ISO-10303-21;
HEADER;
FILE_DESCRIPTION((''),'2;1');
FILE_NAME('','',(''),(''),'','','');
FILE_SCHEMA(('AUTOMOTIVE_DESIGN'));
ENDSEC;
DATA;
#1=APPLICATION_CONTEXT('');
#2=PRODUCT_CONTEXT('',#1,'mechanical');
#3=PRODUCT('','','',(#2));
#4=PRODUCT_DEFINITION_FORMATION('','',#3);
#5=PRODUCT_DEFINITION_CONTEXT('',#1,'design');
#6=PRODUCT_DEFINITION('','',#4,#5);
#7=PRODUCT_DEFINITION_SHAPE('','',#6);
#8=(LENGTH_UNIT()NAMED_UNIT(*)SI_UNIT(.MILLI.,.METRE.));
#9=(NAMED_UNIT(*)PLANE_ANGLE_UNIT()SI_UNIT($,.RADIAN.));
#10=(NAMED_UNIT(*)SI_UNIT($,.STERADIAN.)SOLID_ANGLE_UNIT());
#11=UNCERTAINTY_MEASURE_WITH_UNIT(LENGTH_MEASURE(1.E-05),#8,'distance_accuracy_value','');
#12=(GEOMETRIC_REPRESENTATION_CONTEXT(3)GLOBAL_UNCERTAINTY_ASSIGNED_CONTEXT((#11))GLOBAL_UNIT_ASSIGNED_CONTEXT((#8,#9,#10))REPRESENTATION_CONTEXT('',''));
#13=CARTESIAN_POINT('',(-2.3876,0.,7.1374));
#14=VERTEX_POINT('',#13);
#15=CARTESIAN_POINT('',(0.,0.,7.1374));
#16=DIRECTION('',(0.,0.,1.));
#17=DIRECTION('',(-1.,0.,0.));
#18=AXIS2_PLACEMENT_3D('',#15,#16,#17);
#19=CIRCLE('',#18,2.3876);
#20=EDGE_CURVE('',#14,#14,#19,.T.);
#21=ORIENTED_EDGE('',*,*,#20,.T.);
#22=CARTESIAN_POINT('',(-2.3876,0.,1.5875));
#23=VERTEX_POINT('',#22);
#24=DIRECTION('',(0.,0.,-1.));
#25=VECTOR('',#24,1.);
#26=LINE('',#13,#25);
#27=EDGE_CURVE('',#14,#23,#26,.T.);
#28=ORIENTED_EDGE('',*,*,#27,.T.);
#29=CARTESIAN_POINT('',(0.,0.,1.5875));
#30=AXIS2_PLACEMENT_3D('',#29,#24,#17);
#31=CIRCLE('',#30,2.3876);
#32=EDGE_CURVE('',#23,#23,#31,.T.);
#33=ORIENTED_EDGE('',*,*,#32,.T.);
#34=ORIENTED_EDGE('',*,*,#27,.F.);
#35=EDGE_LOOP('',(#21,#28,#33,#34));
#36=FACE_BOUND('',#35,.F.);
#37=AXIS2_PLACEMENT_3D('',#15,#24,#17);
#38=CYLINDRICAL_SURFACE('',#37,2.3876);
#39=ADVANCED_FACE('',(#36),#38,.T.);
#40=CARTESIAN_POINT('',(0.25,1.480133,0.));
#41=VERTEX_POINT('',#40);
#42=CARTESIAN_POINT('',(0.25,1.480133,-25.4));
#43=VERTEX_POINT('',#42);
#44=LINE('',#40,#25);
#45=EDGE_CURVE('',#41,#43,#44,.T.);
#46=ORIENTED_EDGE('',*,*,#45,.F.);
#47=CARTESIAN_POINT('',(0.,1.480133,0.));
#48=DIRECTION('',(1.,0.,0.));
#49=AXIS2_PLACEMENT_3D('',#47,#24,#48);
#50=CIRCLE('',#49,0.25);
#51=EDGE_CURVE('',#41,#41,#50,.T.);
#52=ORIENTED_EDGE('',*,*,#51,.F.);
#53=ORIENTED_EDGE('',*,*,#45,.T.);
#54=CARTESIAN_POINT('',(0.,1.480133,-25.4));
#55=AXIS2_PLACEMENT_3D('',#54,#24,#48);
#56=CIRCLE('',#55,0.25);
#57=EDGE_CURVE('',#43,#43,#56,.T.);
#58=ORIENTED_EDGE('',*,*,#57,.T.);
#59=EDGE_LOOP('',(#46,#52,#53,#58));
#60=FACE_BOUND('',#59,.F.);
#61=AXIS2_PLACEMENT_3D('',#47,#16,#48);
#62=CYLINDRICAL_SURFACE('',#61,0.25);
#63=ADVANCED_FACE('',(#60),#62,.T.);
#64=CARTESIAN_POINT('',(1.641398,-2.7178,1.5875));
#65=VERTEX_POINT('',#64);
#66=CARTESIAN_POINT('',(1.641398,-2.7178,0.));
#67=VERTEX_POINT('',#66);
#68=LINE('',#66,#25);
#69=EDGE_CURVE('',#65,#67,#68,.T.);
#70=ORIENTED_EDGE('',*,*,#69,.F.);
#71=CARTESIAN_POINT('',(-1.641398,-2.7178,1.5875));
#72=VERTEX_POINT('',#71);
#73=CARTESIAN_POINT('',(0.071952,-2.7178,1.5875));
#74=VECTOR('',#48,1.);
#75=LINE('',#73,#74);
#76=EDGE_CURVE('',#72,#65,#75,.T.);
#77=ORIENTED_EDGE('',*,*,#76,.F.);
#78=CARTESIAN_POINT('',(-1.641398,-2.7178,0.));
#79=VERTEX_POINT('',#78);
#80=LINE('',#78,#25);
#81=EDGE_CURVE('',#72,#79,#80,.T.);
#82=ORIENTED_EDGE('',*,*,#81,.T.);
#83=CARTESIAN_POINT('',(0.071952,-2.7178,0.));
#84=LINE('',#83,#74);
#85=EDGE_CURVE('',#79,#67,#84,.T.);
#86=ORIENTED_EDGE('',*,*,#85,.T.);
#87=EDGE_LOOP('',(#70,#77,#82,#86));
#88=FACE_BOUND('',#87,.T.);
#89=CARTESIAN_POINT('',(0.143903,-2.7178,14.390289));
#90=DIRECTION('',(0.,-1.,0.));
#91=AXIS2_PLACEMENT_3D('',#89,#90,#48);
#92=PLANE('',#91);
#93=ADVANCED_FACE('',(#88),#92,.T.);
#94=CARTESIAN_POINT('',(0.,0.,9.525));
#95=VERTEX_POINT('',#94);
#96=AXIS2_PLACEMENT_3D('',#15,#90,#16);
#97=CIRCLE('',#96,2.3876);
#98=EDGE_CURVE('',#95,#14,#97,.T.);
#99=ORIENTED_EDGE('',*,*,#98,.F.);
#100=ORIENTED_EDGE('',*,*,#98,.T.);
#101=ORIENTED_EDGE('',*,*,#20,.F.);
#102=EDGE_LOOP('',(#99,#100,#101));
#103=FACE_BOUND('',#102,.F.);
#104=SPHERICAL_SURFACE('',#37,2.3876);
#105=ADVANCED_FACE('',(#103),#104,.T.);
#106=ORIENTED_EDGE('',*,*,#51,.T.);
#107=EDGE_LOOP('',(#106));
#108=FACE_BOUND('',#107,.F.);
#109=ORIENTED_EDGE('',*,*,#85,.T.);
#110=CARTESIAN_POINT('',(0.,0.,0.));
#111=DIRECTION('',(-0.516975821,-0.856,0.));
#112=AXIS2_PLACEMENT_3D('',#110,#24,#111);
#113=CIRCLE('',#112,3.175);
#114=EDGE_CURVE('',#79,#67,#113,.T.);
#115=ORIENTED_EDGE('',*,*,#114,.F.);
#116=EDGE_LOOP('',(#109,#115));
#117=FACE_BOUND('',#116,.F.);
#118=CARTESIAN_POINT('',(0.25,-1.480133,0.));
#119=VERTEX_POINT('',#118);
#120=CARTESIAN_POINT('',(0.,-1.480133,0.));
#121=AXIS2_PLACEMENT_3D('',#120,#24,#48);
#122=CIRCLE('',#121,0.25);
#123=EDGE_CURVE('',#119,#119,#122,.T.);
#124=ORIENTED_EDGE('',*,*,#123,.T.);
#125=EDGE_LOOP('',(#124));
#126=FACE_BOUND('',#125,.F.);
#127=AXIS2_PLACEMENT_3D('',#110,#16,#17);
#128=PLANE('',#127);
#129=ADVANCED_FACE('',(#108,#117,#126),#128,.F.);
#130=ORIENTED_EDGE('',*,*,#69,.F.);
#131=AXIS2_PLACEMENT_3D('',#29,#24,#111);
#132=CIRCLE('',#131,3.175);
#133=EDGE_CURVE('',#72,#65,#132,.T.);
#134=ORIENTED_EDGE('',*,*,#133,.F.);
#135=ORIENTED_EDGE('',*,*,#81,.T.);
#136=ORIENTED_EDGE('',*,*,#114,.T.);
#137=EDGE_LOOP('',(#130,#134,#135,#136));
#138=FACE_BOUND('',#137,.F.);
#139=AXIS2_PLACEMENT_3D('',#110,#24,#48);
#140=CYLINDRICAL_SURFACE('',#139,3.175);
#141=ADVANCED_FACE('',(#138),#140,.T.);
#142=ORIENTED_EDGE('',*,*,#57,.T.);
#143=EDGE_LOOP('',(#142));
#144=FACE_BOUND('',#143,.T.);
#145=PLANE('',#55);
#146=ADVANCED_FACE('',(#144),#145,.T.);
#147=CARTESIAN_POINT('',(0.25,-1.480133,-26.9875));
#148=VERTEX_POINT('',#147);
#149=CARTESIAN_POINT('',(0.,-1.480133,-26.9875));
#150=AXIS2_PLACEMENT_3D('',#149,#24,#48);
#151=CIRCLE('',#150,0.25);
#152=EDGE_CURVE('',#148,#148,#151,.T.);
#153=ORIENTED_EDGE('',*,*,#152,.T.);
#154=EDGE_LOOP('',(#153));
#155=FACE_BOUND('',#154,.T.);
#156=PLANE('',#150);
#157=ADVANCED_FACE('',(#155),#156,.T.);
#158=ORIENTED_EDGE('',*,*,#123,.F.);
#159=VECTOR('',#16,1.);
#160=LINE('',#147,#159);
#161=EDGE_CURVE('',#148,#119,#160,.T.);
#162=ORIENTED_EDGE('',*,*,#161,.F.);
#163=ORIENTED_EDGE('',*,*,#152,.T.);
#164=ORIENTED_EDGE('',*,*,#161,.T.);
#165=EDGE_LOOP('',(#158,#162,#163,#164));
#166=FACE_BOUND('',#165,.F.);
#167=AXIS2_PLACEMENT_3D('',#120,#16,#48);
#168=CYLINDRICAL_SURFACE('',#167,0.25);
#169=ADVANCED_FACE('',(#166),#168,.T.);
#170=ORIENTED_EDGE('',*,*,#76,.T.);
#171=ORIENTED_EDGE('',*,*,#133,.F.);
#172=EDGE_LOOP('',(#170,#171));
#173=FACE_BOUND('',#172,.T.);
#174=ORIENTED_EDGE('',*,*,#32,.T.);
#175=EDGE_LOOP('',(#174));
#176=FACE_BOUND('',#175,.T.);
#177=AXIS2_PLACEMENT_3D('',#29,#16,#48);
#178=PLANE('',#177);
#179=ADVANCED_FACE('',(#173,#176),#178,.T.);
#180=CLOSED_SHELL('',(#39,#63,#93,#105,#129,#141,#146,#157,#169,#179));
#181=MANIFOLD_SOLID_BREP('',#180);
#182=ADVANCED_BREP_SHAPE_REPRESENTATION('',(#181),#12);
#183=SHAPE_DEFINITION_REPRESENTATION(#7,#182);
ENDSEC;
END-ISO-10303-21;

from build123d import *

# Parameters (mm, degrees)
F0_R      = 3.175
F1_DEPTH  = 1.5875
F6_W      = 20.4342100769
F6_H      = 36.2635273486
F7_DEPTH  = 10.668
F8_R      = 0.25
F9_DEPTH  = 25.4
F10_DEPTH = 26.9875


# Not quite as in the source:
# - a length typed as a fraction of an inch, garbled in the dataset ("3 / 203.2 mm" for 3/8 in), is restored


with BuildPart() as f1:
    # F0 (on Top) → F1 (new body)
    with BuildSketch(Plane.XY):
        Circle(F0_R)
    extrude(amount=F1_DEPTH)

    # F2 (on Front) → F4 (revolve)
    with BuildSketch(Plane.XZ):
        with BuildLine():
            Line((-2.3876, 0), (0, 0))
            Line((0, 0), (0, 9.525))
            ThreePointArc((0, 9.525), (-1.6882881508, 8.8256881508), (-2.3876, 7.1374))
            Line((-2.3876, 7.1374), (-2.3876, 0))
        make_face()
    revolve(axis=Axis((0, 0, 21.5854328126), (0, 0, 1)))

    # F6 (on offset) → F7 (cut)
    with BuildSketch(Plane.XZ.offset(2.7178)):
        with Locations((0.1439033076, 14.3902888522)):
            Rectangle(F6_W, F6_H)
    extrude(amount=F7_DEPTH, mode=Mode.SUBTRACT)

    # F8 (on face) → F9 (join)
    with BuildSketch(Plane(origin=(0, 0, 0), x_dir=(1, 0, 0), z_dir=(0, 0, -1))):
        with Locations((0, -1.4801331563)):
            Circle(F8_R)
        with Locations((0, 1.4801331563)):
            Circle(F8_R)
    extrude(amount=F9_DEPTH)

    # F8 (on face) → F10 (join)
    with BuildSketch(Plane(origin=(0, 0, 0), x_dir=(1, 0, 0), z_dir=(0, 0, -1))):
        with Locations((0, 1.4801331563)):
            Circle(F8_R)
    extrude(amount=F10_DEPTH)


solid = f1.part
